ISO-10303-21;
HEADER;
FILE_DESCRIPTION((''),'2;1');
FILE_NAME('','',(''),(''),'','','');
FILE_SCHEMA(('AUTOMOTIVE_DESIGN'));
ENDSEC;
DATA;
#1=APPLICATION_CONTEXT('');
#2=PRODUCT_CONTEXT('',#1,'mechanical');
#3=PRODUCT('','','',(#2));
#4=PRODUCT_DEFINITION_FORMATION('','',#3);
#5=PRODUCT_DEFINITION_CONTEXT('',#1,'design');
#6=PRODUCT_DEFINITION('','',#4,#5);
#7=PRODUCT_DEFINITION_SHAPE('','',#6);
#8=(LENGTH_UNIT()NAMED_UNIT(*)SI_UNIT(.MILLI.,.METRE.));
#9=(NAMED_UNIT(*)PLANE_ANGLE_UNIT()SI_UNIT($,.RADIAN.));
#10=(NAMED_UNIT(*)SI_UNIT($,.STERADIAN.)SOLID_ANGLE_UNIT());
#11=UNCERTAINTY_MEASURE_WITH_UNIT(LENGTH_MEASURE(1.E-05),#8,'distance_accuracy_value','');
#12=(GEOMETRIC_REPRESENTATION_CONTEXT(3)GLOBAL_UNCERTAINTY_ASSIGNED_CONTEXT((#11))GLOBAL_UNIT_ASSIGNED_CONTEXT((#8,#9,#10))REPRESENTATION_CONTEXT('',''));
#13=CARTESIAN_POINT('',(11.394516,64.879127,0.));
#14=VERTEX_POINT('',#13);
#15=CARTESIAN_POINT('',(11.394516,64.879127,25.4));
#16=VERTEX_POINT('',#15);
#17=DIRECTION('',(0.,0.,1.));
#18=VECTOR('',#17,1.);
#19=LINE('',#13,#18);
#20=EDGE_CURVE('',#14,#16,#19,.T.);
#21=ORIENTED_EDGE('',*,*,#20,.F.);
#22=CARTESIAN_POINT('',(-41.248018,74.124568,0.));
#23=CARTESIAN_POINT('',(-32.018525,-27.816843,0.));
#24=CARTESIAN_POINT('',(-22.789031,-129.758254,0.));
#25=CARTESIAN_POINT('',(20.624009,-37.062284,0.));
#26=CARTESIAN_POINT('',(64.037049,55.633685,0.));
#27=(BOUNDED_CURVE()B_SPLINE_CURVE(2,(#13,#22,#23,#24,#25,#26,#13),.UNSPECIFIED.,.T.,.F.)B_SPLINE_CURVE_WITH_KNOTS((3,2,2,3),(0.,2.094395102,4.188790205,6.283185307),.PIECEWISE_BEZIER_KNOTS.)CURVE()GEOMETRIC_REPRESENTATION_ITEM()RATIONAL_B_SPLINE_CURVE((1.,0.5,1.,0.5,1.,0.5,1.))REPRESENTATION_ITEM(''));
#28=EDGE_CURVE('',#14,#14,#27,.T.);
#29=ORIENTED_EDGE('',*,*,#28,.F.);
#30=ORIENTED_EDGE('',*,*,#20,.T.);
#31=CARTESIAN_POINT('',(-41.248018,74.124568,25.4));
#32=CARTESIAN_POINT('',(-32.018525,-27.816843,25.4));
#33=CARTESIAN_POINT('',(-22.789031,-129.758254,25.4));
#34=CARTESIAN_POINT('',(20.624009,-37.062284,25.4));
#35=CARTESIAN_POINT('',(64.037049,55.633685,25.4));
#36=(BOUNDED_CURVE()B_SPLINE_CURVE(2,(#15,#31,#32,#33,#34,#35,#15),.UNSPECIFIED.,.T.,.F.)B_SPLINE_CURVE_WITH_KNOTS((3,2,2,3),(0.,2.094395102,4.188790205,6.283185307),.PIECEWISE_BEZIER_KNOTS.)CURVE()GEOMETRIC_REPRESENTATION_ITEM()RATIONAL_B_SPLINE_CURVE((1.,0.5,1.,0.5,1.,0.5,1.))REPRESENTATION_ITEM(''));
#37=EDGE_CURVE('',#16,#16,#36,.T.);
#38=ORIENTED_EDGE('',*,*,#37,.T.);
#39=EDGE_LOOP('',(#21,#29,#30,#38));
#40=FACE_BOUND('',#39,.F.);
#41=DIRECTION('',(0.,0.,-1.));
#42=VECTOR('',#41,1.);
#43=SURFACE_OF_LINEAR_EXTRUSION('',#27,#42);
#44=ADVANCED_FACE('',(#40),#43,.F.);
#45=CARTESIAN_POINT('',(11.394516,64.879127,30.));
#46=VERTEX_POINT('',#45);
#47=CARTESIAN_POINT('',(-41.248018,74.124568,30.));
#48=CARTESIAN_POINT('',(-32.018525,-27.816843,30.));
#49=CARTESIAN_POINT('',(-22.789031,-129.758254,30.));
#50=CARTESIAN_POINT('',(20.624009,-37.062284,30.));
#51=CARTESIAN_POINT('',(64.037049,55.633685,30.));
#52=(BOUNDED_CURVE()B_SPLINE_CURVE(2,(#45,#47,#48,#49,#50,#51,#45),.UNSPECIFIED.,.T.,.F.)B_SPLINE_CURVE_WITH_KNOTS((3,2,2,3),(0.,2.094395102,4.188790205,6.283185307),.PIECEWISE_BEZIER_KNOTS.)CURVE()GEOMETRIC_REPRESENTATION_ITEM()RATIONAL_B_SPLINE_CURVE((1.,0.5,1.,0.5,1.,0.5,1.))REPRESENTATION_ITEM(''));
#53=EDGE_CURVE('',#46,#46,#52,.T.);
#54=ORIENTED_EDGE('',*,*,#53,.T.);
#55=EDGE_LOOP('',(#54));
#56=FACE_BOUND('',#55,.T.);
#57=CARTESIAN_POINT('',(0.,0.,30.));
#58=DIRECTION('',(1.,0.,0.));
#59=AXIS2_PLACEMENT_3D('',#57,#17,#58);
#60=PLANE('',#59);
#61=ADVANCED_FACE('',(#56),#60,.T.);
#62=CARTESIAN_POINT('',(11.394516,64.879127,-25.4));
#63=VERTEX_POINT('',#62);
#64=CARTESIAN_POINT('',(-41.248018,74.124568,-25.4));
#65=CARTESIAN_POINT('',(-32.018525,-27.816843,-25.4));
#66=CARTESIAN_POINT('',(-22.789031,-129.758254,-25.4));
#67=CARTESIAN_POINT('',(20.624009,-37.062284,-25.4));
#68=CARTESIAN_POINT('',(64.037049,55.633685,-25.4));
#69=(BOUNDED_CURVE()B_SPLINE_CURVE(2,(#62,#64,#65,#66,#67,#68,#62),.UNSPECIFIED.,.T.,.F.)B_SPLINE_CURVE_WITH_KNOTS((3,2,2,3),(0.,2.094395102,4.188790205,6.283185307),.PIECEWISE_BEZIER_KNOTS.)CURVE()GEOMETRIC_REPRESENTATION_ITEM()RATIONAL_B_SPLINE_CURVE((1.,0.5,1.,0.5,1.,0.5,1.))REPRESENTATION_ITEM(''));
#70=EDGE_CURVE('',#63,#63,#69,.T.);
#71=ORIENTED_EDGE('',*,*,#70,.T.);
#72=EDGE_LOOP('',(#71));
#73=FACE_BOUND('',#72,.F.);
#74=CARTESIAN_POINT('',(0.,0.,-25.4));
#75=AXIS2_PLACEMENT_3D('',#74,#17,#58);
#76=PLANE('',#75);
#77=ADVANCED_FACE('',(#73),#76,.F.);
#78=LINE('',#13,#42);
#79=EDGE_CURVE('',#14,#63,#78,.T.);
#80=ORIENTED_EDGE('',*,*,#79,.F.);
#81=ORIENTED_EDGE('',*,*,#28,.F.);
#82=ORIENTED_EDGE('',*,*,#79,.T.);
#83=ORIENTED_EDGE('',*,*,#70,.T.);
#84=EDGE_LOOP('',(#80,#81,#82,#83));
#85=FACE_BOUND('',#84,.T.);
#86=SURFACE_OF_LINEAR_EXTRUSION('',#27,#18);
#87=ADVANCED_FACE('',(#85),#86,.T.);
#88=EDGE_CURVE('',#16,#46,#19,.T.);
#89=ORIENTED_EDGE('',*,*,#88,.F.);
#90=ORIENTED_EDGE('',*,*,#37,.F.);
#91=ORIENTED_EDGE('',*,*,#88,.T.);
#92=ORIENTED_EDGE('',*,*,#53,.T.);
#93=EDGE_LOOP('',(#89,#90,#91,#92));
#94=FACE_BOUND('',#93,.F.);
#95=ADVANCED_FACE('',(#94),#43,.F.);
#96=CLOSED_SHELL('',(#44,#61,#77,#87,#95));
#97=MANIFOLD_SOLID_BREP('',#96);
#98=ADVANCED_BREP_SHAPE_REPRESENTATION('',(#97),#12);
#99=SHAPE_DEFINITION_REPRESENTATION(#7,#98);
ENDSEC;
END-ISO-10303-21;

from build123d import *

# Parameters (mm, degrees)
F3_DEPTH      = 30
F4_DEPTH      = 25.4
F4_DEPTH_BACK = 25.4


# Not quite as in the source:
# - the program builds the solid bodies; features that only make, move or delete a surface that nothing else refers to are left out


with BuildPart() as f3:
    # F2 (on Top) → F3 (new body)
    with BuildSketch(Plane.XY):
        with BuildLine():
            add(Edge.make_bspline(
                [(11.3945156336, 64.8791268468), (-41.2480181608, 74.124568385), (-32.018524714, -27.8168426543), (-22.7890312672, -129.7582536936), (20.6240090804, -37.0622841925), (64.037049428, 55.6336853086), (11.3945156336, 64.8791268468)],
                knots=[0, 0, 0, 2.0943951024, 2.0943951024, 4.1887902048, 4.1887902048, 6.2831853072, 6.2831853072, 6.2831853072], degree=2, weights=[1, 0.5, 1, 0.5, 1, 0.5, 1]))
        make_face()
    extrude(amount=F3_DEPTH)

    # F4 (add, two sides): a face of the model
    f4_faces = [f3.faces().sort_by_distance(p)[0] for p in [
        (-0.0237732342, -0.1695698228, 0),
    ]]
    extrude(f4_faces, amount=F4_DEPTH)
    extrude(f4_faces, amount=-F4_DEPTH_BACK)


solid = f3.part
